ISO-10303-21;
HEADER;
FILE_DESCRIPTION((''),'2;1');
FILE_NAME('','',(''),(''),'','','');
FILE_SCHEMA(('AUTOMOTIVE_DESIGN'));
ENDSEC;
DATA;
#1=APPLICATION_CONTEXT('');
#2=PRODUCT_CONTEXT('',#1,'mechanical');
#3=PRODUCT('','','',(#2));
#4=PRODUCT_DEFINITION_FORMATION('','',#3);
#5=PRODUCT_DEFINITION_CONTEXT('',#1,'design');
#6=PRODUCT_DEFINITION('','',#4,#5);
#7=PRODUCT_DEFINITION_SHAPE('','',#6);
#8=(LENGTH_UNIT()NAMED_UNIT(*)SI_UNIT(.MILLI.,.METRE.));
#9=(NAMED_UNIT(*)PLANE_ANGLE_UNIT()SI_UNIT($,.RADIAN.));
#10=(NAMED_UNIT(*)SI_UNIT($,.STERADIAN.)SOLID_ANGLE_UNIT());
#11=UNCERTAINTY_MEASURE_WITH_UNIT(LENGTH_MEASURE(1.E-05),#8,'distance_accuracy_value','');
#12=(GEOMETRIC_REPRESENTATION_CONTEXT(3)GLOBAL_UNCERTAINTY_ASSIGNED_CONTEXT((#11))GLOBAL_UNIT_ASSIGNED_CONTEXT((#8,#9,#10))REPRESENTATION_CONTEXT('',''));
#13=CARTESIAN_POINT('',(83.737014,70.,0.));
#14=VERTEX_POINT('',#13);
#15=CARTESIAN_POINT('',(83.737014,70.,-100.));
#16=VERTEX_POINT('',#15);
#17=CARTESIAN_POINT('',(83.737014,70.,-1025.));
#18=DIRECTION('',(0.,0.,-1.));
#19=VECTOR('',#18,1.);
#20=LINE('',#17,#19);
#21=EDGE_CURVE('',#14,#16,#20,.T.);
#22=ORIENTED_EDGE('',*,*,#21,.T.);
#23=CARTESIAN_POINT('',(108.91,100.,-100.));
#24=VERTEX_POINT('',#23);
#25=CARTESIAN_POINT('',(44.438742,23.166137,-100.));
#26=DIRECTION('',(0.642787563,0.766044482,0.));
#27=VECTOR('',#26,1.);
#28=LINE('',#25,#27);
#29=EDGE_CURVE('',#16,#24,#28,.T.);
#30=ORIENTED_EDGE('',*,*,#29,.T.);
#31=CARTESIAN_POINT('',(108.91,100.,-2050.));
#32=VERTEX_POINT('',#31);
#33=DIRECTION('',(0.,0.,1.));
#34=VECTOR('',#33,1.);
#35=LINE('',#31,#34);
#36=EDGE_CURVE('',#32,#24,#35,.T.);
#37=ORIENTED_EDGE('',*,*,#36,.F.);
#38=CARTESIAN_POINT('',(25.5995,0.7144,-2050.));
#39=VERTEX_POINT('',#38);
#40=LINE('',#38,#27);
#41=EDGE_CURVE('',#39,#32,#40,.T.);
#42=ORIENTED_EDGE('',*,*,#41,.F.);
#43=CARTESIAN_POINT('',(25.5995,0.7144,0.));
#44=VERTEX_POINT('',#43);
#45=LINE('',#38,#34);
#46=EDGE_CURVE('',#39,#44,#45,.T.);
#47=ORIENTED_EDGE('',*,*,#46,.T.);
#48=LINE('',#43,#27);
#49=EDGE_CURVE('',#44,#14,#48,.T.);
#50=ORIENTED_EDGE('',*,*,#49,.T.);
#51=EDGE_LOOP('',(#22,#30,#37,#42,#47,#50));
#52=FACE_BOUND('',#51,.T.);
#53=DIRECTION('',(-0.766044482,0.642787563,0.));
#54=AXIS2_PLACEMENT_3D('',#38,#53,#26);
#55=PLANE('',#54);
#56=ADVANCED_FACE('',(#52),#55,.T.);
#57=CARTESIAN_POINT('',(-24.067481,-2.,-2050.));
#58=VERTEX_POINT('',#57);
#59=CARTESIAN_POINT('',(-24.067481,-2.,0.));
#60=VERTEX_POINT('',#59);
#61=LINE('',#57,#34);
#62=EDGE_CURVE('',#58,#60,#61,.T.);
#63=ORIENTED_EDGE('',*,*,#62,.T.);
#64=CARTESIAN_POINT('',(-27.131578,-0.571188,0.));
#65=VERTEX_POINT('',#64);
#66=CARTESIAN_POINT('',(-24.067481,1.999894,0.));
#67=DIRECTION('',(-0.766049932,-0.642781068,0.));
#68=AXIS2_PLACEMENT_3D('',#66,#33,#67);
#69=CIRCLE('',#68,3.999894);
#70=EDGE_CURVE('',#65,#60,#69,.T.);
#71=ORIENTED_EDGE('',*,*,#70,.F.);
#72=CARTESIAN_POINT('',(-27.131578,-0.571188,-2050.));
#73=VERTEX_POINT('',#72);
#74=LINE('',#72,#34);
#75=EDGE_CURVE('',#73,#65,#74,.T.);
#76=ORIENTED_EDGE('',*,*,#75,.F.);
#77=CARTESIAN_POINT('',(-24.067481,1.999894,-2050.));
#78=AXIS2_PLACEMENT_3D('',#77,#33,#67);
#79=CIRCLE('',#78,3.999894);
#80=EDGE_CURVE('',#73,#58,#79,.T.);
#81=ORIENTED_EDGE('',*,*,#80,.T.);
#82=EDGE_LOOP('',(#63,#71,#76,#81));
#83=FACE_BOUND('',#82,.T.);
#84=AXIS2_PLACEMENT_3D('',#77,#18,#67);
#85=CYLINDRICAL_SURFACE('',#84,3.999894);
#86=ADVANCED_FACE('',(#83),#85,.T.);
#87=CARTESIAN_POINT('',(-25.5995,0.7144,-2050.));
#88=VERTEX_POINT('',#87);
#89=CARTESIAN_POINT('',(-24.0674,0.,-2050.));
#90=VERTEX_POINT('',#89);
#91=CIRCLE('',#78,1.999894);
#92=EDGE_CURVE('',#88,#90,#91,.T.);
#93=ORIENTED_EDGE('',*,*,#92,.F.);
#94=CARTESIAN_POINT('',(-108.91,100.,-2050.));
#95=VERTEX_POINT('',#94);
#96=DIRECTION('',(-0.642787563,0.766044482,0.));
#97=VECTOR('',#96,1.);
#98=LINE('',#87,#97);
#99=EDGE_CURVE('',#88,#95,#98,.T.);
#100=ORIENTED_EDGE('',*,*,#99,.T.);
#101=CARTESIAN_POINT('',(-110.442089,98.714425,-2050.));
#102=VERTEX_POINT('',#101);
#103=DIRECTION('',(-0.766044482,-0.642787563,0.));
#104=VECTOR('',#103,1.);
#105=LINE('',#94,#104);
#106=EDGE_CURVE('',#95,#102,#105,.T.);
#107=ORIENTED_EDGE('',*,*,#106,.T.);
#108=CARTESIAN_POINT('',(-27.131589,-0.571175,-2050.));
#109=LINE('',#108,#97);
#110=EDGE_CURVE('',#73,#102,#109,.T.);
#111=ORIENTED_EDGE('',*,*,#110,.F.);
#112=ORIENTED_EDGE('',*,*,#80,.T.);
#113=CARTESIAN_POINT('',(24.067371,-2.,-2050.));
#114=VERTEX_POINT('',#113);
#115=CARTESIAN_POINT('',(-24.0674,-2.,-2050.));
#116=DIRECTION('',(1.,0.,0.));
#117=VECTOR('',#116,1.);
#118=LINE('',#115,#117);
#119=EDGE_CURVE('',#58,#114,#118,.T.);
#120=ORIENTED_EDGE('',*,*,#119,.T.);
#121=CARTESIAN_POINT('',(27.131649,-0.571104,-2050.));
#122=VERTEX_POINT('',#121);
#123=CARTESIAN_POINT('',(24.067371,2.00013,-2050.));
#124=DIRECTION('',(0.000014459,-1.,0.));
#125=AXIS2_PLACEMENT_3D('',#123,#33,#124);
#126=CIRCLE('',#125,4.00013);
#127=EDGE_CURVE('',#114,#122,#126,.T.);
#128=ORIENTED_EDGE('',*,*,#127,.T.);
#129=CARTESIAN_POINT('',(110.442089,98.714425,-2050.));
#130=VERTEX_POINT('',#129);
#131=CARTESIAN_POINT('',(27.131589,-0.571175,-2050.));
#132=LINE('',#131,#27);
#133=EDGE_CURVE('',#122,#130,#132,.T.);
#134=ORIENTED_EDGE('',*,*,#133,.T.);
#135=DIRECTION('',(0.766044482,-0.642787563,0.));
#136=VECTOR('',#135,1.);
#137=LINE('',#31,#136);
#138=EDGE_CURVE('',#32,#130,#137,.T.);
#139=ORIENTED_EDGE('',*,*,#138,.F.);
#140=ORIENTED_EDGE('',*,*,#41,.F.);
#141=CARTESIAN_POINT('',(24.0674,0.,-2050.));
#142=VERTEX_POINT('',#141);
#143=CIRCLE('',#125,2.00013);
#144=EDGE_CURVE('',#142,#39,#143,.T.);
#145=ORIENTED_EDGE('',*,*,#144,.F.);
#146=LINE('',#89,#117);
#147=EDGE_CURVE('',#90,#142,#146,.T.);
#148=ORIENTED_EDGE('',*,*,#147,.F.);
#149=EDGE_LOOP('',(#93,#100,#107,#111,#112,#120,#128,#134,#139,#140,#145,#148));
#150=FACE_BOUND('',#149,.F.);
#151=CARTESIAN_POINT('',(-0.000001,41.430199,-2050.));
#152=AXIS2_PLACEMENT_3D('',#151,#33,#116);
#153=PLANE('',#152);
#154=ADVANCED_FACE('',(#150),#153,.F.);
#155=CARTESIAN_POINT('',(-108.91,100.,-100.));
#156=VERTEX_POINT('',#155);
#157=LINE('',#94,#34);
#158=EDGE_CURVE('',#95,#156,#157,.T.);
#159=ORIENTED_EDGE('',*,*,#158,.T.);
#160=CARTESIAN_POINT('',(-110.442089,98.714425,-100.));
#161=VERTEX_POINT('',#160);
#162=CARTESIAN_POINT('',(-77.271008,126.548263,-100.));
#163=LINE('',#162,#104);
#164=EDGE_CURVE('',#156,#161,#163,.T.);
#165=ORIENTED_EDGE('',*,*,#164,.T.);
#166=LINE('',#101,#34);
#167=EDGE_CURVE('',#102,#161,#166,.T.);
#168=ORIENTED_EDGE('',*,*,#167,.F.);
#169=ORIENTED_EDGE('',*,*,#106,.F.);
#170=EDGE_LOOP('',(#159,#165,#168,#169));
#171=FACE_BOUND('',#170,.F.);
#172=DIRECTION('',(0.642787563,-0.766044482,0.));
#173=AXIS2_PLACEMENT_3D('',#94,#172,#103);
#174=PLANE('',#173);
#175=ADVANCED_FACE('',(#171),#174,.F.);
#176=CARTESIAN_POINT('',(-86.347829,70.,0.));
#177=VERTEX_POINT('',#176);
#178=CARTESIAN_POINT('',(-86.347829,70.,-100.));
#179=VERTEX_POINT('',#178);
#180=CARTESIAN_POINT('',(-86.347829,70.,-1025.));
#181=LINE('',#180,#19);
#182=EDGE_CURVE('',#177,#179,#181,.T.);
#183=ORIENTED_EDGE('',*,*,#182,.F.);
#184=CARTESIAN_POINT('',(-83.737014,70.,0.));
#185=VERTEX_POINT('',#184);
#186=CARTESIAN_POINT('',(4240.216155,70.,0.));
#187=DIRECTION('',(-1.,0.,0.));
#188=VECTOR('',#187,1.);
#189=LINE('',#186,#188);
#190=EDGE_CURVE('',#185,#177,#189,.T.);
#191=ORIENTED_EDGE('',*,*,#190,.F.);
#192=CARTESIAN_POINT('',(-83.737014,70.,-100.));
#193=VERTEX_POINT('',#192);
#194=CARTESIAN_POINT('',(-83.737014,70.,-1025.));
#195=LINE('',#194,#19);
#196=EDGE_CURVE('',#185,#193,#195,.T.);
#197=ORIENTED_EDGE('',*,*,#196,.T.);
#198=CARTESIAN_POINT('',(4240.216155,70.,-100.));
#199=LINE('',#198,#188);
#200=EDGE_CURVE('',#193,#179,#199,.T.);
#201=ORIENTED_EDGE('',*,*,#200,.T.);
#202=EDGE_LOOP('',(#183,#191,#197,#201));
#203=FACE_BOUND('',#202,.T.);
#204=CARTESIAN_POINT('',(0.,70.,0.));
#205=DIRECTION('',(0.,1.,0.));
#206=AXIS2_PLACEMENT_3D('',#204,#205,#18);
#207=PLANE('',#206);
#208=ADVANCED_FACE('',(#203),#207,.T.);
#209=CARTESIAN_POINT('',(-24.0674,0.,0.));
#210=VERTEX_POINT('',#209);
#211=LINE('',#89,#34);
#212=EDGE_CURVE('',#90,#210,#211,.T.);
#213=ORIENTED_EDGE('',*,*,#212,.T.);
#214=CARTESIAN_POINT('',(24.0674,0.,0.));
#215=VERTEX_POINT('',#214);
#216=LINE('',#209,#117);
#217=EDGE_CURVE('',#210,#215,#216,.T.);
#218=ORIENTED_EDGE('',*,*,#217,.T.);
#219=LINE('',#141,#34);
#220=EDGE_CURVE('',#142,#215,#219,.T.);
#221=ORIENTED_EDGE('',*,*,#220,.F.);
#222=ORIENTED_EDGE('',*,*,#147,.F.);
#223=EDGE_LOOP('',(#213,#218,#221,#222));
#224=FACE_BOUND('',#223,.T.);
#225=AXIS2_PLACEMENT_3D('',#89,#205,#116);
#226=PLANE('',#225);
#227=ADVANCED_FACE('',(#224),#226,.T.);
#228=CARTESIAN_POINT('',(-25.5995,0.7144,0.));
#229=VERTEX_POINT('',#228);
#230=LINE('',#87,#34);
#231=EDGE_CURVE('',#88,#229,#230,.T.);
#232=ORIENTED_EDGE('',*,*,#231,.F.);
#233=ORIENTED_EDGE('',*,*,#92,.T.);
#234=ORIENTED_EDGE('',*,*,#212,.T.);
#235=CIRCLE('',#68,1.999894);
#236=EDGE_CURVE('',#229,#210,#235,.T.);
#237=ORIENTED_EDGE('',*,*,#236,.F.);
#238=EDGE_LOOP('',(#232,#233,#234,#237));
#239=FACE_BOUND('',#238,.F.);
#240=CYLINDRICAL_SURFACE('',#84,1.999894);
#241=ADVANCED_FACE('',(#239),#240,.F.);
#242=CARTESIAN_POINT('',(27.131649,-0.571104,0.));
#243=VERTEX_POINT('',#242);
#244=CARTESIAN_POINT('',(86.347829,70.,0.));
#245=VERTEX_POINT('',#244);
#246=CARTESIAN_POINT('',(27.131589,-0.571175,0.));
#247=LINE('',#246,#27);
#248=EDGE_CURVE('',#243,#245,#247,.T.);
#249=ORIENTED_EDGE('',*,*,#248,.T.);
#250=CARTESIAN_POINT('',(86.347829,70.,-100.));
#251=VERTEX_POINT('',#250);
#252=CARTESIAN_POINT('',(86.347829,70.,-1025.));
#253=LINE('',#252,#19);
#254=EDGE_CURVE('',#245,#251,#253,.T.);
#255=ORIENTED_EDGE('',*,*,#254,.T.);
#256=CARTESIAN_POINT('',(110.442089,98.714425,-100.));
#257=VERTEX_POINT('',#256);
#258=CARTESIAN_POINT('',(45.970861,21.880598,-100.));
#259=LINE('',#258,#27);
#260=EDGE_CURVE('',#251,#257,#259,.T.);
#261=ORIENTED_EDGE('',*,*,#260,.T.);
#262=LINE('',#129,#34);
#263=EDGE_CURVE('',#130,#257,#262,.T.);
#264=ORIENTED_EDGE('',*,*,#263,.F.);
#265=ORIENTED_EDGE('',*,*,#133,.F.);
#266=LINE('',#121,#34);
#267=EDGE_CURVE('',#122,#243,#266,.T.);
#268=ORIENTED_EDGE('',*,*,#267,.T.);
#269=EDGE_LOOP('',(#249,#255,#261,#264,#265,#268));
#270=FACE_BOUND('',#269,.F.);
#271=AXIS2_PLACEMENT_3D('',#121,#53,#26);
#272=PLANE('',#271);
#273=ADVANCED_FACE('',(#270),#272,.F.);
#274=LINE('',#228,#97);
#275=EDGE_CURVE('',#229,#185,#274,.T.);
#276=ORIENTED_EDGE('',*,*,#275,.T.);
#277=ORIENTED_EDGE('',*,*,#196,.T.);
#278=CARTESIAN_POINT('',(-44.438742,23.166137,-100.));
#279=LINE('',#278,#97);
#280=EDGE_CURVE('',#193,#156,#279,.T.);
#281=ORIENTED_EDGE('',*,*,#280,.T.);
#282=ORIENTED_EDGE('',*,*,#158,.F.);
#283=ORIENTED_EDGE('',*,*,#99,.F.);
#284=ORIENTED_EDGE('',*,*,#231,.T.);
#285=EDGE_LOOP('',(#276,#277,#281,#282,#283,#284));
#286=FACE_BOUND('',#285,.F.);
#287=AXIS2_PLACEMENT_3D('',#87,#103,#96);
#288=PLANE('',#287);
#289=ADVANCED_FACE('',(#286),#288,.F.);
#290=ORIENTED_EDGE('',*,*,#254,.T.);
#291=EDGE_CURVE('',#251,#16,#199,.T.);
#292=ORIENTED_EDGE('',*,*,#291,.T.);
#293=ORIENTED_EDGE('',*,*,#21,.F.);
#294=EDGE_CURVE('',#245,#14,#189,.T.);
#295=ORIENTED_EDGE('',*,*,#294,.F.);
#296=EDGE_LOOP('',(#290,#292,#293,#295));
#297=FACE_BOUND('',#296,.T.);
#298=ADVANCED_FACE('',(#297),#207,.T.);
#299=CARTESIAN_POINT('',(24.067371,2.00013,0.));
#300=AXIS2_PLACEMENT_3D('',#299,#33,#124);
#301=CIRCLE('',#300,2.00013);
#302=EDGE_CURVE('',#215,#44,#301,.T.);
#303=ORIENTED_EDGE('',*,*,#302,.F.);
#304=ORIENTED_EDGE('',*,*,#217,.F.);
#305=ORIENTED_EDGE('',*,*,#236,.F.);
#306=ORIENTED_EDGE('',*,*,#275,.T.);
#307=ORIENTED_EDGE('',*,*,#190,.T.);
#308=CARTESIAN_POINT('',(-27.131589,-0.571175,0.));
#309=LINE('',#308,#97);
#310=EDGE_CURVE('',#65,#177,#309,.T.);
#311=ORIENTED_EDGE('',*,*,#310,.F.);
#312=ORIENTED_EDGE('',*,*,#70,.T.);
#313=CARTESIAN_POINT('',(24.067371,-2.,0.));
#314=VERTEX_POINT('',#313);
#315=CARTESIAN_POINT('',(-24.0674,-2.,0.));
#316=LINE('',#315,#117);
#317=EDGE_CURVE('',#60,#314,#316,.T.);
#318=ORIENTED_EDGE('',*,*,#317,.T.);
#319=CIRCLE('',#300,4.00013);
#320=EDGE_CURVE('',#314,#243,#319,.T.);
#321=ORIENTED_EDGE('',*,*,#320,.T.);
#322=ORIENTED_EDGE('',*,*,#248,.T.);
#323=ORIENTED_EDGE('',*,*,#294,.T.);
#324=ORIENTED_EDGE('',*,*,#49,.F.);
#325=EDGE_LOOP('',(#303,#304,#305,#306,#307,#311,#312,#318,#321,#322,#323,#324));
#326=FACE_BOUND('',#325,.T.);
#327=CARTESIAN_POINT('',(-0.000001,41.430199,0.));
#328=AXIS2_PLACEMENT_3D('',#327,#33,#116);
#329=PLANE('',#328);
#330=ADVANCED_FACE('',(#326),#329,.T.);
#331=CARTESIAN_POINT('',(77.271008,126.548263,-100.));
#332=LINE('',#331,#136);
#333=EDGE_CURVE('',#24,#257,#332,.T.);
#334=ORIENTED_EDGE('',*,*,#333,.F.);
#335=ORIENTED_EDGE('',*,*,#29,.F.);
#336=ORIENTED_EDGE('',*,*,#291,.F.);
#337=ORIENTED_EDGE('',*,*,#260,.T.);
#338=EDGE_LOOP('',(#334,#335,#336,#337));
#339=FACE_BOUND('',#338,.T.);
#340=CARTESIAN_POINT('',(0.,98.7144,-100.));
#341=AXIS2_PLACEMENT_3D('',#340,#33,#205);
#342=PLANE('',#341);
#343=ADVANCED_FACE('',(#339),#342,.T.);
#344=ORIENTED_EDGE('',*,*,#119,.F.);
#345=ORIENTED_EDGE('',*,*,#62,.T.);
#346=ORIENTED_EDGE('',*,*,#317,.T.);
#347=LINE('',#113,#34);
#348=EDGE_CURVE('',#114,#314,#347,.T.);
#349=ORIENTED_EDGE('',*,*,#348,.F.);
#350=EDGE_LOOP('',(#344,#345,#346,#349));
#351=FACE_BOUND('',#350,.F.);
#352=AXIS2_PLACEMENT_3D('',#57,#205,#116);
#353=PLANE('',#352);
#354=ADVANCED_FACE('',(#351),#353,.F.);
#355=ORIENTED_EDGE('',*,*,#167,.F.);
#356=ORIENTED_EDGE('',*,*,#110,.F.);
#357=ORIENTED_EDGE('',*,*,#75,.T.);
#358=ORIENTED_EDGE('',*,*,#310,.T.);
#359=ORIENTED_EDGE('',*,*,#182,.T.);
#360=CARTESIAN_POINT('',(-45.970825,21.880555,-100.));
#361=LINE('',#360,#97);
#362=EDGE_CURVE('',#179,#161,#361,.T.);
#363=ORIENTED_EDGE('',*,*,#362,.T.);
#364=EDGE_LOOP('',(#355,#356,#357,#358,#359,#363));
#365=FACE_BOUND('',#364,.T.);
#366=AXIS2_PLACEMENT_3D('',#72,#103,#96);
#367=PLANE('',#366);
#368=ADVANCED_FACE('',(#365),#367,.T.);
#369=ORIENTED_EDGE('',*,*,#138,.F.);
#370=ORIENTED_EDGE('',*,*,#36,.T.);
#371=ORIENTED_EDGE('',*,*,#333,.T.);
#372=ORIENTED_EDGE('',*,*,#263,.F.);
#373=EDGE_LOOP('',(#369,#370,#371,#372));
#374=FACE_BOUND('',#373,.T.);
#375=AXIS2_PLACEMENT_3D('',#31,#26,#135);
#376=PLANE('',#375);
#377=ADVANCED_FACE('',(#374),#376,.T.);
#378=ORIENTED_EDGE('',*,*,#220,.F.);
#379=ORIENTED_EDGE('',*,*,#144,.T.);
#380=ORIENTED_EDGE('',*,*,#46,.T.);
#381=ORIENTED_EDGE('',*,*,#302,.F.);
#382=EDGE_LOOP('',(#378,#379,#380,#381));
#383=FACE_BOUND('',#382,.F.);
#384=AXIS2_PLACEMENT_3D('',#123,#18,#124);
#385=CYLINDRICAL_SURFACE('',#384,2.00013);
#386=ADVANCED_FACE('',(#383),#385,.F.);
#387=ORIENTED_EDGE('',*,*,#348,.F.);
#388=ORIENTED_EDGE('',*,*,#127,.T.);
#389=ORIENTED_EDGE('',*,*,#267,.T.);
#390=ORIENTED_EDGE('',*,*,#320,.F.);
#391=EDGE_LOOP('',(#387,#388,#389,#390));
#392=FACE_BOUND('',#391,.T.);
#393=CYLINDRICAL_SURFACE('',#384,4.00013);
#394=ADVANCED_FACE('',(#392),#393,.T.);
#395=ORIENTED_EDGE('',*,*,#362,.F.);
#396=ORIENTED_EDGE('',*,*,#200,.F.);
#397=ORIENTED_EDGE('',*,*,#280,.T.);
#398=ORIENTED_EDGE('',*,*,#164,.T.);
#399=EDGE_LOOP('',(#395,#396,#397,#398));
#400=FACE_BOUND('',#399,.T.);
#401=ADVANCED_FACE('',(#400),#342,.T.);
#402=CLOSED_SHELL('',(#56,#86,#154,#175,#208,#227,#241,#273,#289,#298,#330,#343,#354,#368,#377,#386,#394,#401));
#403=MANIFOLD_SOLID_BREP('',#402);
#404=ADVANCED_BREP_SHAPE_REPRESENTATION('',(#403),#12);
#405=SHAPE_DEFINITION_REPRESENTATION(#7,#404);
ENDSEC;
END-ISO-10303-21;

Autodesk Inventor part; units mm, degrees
ref_plane "YZ Plane" through (0, 0, 0) normal (1, 0, 0) x (0, 1, 0)
ref_plane "XZ Plane" through (0, 0, 0) normal (0, 1, 0) x (-1, 0, 0)
ref_plane "XY Plane" through (0, 0, 0) normal (0, 0, 1) x (1, 0, 0)
sketch "Sketch4" plane through (0, 0, 0) normal (0, 0, 1) x (1, 0, 0)
  line L0 (-25, 0) -> (-24.0674, 0) construction
  line L1 (25, 0) -> (25.5995, 0.7144) construction
  line L2 (-25, 0) -> (-25.5995, 0.7144) construction
  line L3 (-108.91, 100) -> (108.91, 100) construction
  arc A0 (-25.5995, 0.7144) -> (-24.0674, 0) centre (-24.0674, 2) ccw
  arc A1 (24.0674, 0) -> (25.5995, 0.7144) centre (24.0674, 2) ccw
  line L4 (24.0674, 0) -> (25, 0) construction
  line L5 (25.5995, 0.7144) -> (108.91, 100)
  line L6 (-25.5995, 0.7144) -> (-108.91, 100)
  line L7 (-24.0674, 0) -> (24.0674, 0)
  point P0 (0, 0)
  point P1 (0, 0)
  point P2 (0, 100)
  point P3 (0, 0)
  dimension "d14" = 217.8199
  dimension "d15" = 50
  dimension "d16" = 100
  dimension "d17" = 2
  dimension "d39" = 130
contour flange "Contour Flange2" sketch "Sketch4" thickness 2 bend radius 2 width 2050 along (0, 0, -1) mid plane no both sides no wall seen from (-67.2547, 50.3572, 0) lies toward (-0.7660444, -0.6427876, 0) curves L6 A0 L7 A1 L5
bend "Bend4"
corner "Corner4"
sketch "Sketch6" plane through (0, 0, 0) normal (1, 0, 0) x (0, 1, 0)
  line L0 (100, -2050) -> (100, 0) projected
  line L1 (-0.5712, 0) -> (98.7144, 0) projected
  line L2 (98.7144, 0) -> (98.7144, -2050) projected
  line L3 (98.7144, 0) -> (100, 0)
  line L4 (70, 0) -> (70, -100)
  line L5 (70, -100) -> (100, -100)
  point P0 (0, 0)
  dimension "d51" = 30
  dimension "d52" = 100
extrude "Extrusion1" cut sketch "Sketch6" along normal through all both and the other way through all
equation "\"d15\" = Лоток_ширина_низ"
equation "\"d16\" = Лоток_высота"
equation "\"d17\" = BendRadius"
equation "\"d39\" = Лоток_угол"
equation "\"d51\" = Лоток_глубина_выреза"
equation "\"d40\" = Thickness"
equation "\"d41\" = BendReliefWidth"
equation "\"d42\" = BendReliefDepth"
equation "\"d43\" = MinimumRemnant"
equation "\"d44\" = TransitionRadius"
equation "\"d46\" = BendRadius"
equation "\"d48\" = CornerReliefSize"
equation "\"d49\" = GapSize"
equation "\"d50\" = JacobiRadiusSize"
equation "\"BendRadius\" = Thickness"
equation "\"BendReliefWidth\" = Thickness"
equation "\"BendReliefDepth\" = 0.5 * Thickness"
equation "\"CornerReliefSize\" = 4 * Thickness"
equation "\"MinimumRemnant\" = 2 * Thickness"
equation "\"TransitionRadius\" = BendRadius"
equation "\"JacobiRadiusSize\" = BendRadius"
equation "\"GapSize\" = Thickness"
equation "\"Лоток_ширина_низ\" = 50"
equation "\"Лоток_ширина_верх\" = 200"
equation "\"Лоток_высота\" = 100"
equation "\"Лоток_угол\" = 130deg"
equation "\"Лоток_глубина_выреза\" = 30"
equation "\"Thickness\" = 2"
properties part number "ДМС 040 лоток илоотвод"
